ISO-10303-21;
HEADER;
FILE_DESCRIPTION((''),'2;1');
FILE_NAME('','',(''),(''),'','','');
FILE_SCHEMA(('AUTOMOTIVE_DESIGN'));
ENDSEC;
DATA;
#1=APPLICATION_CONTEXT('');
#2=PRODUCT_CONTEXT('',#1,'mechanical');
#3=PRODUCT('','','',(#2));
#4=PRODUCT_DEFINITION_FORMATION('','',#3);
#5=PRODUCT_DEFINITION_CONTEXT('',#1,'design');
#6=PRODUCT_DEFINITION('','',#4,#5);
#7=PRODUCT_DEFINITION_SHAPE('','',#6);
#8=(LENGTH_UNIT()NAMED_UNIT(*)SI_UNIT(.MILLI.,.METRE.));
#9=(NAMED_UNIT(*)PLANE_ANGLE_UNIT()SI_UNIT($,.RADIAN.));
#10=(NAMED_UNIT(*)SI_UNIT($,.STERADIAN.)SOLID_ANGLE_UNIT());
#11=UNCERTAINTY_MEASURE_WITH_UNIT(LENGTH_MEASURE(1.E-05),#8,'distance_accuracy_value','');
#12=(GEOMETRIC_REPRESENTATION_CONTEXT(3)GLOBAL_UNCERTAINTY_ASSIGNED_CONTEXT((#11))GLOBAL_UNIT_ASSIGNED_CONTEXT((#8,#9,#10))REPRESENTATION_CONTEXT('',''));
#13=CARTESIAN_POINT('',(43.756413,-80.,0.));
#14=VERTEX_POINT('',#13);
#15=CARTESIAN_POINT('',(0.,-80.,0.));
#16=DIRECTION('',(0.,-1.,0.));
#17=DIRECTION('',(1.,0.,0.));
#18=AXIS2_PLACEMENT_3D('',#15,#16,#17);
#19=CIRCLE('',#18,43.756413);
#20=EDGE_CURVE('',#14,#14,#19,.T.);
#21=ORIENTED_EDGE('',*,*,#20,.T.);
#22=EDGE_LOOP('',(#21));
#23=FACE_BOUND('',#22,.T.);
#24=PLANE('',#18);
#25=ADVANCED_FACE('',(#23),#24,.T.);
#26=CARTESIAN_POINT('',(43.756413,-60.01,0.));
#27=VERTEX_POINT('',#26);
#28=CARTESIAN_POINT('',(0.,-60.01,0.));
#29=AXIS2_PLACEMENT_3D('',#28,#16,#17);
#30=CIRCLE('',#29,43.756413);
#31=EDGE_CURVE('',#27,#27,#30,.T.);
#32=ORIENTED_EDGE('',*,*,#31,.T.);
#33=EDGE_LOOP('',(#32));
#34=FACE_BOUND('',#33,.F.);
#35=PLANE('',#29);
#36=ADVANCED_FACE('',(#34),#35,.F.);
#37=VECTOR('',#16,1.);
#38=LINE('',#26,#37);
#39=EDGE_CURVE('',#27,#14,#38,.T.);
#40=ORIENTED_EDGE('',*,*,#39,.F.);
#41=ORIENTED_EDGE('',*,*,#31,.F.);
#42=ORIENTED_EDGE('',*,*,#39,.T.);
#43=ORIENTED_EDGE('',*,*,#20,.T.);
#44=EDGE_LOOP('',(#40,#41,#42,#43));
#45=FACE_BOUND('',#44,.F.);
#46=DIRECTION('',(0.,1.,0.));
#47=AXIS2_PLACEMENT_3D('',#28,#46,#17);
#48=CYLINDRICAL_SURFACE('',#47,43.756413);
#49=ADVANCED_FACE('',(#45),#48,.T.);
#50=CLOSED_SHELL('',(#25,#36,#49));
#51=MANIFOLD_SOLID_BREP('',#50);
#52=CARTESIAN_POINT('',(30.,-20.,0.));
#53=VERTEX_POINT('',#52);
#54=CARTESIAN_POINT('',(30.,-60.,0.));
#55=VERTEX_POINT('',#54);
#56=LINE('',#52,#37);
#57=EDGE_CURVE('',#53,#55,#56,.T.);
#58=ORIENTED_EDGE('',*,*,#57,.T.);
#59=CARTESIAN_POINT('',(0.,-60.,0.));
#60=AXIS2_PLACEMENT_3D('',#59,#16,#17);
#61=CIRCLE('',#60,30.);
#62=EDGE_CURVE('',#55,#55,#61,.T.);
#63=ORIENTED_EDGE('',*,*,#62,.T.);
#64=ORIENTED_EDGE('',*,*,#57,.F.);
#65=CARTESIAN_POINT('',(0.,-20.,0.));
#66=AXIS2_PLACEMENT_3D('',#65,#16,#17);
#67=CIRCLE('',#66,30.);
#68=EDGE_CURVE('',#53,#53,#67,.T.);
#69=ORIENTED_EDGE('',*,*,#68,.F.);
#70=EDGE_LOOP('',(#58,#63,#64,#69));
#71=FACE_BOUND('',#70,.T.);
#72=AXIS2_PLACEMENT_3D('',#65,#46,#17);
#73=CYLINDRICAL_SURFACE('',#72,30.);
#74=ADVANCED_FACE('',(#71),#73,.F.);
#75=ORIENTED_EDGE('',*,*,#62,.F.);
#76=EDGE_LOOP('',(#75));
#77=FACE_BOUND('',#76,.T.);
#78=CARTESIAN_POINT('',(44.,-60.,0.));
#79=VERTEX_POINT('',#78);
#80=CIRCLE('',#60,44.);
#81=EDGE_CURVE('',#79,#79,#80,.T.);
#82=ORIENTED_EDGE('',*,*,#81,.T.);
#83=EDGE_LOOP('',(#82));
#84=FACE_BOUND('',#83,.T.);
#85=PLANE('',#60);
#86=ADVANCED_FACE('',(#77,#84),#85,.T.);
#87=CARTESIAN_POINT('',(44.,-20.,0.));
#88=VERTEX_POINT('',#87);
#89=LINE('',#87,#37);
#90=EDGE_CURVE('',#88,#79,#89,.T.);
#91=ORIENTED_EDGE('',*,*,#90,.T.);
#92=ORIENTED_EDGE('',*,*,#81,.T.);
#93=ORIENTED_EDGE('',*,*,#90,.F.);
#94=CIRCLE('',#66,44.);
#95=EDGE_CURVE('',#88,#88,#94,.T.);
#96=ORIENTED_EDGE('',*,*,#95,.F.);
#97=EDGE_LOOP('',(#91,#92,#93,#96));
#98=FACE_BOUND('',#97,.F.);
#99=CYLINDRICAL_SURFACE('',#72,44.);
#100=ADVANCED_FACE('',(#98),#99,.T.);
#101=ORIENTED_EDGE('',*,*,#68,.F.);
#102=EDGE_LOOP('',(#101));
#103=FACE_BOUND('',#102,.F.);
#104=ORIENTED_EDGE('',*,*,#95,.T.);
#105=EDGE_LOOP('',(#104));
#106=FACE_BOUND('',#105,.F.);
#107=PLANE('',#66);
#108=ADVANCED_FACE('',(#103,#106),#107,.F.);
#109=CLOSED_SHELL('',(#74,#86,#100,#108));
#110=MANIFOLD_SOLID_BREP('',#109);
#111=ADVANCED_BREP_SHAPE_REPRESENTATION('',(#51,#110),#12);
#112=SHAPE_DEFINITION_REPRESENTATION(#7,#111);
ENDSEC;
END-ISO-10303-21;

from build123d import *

# Parameters (mm, degrees)
F1_START = 20
F0_R     = 44
F0_R_2   = 30
F1_DEPTH = 40
F3_START = 60.01
F2_R     = 43.7564133354
F3_DEPTH = 19.99


with BuildPart() as f1:
    # F0 (on Front) → F1 (new body)
    with BuildSketch(Plane.XZ.offset(F1_START)):
        Circle(F0_R)
        Circle(F0_R_2, mode=Mode.SUBTRACT)
    extrude(amount=F1_DEPTH)


with BuildPart() as f3:
    # F2 (on Front) → F3 (new body)
    with BuildSketch(Plane.XZ.offset(F3_START)):
        Circle(F2_R)
    extrude(amount=F3_DEPTH)


solid = Compound([f1.part, f3.part])
